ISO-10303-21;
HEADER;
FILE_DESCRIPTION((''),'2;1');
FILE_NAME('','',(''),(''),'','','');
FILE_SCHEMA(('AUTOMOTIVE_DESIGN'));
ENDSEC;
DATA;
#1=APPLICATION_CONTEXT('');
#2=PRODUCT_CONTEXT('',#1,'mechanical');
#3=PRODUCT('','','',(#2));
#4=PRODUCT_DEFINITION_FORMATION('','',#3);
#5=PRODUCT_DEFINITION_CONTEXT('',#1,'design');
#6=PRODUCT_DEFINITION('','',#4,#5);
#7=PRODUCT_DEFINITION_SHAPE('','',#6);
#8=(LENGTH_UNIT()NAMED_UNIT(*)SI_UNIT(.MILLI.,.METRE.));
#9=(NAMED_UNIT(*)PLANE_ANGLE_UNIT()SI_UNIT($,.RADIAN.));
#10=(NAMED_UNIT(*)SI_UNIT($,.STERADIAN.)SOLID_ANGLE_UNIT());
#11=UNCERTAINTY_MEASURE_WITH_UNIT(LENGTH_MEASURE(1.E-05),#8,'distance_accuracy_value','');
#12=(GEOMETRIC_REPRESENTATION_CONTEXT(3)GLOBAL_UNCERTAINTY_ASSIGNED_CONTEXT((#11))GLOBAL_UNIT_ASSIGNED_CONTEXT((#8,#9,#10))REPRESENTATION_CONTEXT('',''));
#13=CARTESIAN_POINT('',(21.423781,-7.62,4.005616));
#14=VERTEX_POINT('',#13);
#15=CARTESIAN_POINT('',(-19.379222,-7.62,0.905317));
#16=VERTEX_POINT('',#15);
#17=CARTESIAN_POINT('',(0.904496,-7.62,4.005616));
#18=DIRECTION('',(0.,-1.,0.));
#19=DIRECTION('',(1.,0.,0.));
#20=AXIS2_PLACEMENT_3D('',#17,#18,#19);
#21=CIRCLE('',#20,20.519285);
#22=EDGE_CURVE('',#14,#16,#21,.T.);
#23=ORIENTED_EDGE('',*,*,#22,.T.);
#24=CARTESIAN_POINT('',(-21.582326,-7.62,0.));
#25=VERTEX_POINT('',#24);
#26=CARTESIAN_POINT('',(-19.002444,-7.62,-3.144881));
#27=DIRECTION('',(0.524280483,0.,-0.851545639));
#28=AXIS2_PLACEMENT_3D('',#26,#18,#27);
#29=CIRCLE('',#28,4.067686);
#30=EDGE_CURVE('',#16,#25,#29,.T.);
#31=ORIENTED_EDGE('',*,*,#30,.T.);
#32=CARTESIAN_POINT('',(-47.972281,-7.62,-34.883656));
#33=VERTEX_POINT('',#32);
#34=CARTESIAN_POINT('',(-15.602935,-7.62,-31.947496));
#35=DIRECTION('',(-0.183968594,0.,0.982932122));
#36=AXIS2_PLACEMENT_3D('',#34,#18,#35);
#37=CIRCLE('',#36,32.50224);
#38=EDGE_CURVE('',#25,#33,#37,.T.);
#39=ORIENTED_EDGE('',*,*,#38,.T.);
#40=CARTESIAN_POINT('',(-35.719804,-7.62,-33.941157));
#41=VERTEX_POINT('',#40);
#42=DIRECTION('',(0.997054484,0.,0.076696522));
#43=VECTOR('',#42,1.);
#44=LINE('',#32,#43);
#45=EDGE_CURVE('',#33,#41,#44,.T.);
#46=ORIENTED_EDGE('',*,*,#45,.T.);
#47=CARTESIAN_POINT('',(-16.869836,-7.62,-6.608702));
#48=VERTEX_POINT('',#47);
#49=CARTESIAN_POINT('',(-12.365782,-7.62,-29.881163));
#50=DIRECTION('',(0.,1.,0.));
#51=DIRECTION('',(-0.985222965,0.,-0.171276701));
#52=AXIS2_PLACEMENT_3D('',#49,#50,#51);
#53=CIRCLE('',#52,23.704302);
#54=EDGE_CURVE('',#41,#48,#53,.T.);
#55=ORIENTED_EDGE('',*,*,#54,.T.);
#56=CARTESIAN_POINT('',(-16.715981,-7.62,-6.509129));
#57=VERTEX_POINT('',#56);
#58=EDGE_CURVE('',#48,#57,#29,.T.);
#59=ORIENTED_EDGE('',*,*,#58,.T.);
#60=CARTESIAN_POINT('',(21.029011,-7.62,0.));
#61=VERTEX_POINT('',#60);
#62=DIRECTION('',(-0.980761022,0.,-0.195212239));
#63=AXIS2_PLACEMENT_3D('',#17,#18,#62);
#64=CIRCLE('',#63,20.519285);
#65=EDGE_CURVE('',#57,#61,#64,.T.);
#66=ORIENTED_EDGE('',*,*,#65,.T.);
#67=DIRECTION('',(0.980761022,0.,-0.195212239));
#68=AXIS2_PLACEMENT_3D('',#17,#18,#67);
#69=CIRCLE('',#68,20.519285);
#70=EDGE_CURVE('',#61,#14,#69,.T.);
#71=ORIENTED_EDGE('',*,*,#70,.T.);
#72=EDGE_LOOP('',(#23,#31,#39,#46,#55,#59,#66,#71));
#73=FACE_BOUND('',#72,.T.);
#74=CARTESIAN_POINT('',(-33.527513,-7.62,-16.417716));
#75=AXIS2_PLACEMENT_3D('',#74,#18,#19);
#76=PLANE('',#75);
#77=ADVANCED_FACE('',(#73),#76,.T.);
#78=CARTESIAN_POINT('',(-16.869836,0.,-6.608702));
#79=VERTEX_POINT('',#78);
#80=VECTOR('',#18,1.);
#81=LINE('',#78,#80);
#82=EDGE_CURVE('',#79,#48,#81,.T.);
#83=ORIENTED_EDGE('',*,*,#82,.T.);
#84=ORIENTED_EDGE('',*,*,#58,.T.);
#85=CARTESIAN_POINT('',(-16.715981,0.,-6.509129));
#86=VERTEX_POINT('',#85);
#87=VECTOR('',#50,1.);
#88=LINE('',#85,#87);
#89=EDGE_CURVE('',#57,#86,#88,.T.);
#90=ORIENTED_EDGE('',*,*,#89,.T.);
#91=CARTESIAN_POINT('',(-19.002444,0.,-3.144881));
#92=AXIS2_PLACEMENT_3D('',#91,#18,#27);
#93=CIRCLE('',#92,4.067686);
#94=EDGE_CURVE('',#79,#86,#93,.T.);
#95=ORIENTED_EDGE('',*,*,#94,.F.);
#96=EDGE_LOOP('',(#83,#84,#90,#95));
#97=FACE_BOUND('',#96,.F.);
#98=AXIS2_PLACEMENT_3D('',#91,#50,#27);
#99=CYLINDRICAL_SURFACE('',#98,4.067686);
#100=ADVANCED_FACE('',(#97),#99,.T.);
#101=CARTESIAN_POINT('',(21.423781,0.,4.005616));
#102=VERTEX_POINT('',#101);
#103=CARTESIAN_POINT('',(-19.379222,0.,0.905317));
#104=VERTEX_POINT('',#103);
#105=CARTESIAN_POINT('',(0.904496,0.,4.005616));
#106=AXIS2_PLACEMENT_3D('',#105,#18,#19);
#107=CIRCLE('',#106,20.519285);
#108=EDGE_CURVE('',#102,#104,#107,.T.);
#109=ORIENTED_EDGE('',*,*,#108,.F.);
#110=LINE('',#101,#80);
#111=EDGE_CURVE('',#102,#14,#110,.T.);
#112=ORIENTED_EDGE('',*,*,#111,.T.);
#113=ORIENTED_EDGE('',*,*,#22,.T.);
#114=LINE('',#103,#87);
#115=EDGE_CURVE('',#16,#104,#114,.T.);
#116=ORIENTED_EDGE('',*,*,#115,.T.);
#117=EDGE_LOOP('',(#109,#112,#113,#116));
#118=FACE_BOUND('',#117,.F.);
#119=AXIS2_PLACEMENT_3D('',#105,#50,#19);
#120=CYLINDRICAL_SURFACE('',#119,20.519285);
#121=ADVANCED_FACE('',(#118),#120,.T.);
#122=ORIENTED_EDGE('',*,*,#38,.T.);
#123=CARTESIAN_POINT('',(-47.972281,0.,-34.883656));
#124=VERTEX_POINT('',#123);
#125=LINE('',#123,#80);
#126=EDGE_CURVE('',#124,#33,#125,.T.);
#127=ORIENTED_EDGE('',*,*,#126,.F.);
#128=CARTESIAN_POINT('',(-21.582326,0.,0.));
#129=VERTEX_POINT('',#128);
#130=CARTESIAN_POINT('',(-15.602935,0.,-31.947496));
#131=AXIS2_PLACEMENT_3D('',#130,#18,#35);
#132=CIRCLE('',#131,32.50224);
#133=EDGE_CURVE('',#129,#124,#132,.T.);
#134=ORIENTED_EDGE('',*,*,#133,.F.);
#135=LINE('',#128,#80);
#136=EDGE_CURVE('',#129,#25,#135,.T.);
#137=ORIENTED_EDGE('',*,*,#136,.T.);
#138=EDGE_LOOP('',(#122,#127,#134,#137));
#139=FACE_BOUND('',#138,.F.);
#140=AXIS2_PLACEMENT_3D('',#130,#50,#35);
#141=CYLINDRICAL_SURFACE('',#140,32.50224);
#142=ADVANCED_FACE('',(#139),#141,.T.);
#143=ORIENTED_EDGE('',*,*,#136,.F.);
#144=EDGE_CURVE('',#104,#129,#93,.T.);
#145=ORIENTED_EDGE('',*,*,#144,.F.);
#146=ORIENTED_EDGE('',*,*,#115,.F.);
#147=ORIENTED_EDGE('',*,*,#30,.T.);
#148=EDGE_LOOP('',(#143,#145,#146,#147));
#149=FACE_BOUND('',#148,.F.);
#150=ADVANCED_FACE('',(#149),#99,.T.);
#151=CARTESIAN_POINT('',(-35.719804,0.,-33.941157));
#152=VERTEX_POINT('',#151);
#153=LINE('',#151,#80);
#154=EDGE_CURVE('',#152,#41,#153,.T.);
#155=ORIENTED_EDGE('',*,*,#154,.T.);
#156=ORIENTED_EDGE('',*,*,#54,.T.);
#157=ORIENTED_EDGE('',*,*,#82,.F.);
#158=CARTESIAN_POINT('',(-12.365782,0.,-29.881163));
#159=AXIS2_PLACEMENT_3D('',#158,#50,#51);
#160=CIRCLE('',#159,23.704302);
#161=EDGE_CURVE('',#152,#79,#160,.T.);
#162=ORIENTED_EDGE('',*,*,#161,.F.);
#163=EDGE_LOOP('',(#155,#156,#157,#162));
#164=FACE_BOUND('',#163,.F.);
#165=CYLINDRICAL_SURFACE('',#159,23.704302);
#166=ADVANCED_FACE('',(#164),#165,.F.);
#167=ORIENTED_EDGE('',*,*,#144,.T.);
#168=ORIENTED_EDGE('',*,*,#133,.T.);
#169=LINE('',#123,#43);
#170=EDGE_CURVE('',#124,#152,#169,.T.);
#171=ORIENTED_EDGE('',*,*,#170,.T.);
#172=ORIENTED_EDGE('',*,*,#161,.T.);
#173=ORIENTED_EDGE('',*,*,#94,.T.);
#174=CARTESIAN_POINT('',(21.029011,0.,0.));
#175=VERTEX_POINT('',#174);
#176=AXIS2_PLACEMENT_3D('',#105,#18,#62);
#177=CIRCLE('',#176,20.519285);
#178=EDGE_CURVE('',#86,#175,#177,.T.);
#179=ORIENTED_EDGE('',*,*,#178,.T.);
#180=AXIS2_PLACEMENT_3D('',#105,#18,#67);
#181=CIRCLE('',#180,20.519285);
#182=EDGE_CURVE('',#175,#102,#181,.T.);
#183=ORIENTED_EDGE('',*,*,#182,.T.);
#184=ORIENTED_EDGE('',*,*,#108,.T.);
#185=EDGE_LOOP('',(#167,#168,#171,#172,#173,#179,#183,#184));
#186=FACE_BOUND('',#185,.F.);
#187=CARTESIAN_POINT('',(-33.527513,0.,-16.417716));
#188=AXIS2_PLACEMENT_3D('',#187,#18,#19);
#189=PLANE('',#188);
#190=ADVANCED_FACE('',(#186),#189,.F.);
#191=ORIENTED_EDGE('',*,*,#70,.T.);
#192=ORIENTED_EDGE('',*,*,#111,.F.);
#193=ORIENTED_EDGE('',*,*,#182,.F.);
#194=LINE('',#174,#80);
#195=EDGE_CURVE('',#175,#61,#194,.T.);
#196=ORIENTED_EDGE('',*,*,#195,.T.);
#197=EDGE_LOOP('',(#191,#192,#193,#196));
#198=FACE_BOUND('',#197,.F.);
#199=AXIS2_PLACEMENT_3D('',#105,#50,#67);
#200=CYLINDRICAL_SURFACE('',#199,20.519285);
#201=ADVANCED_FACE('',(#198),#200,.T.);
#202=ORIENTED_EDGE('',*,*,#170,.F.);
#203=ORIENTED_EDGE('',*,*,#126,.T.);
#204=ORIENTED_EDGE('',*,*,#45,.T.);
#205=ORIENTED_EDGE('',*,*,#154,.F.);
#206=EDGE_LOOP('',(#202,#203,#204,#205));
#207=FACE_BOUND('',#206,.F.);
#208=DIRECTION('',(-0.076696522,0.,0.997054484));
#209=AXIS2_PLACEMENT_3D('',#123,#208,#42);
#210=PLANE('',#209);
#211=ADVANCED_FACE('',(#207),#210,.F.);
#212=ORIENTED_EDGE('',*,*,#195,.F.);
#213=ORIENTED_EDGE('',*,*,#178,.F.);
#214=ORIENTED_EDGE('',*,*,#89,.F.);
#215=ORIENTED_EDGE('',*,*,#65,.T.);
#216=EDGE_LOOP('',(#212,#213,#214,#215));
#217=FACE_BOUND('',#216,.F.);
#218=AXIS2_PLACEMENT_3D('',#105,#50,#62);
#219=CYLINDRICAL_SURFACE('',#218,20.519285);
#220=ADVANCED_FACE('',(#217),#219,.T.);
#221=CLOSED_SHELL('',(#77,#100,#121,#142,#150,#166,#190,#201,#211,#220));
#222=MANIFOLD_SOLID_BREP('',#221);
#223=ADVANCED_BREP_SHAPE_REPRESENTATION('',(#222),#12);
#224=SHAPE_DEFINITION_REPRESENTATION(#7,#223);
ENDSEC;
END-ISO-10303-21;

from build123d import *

# Parameters (mm, degrees)
F1_DEPTH = 7.62
F3_DEPTH = 7.62


with BuildPart() as f1:
    # F0 (on Front) → F1 (new body)
    with BuildSketch(Plane.XZ):
        with BuildLine():
            ThreePointArc((21.0290110962, 0), (21.3248501657, 1.9931047456), (21.4237811773, 4.0056155995))
            ThreePointArc((21.4237811773, 4.0056155995), (-1.1080148506, 24.4259697619), (-19.2200190896, 0))
            ThreePointArc((-19.2200190896, 0), (0.9044960033, -16.5136695746), (21.0290110962, 0))
        make_face()
    extrude(amount=F1_DEPTH)

    # F2 (on Front) → F3 (join)
    with BuildSketch(Plane.XZ):
        with BuildLine():
            ThreePointArc((-16.8698355556, -6.6087017767), (-15.6905339278, -0.7832460117), (-21.5823259205, 0))
            ThreePointArc((-21.5823259205, 0), (-41.5234625412, -12.3382675542), (-47.9722805321, -34.8836556077))
            Line((-47.9722805321, -34.8836556077), (-35.7198044658, -33.9411571622))
            ThreePointArc((-35.7198044658, -33.9411571622), (-31.8794663631, -16.423449292), (-16.8698355556, -6.6087017767))
        make_face()
    extrude(amount=F3_DEPTH)


solid = f1.part
